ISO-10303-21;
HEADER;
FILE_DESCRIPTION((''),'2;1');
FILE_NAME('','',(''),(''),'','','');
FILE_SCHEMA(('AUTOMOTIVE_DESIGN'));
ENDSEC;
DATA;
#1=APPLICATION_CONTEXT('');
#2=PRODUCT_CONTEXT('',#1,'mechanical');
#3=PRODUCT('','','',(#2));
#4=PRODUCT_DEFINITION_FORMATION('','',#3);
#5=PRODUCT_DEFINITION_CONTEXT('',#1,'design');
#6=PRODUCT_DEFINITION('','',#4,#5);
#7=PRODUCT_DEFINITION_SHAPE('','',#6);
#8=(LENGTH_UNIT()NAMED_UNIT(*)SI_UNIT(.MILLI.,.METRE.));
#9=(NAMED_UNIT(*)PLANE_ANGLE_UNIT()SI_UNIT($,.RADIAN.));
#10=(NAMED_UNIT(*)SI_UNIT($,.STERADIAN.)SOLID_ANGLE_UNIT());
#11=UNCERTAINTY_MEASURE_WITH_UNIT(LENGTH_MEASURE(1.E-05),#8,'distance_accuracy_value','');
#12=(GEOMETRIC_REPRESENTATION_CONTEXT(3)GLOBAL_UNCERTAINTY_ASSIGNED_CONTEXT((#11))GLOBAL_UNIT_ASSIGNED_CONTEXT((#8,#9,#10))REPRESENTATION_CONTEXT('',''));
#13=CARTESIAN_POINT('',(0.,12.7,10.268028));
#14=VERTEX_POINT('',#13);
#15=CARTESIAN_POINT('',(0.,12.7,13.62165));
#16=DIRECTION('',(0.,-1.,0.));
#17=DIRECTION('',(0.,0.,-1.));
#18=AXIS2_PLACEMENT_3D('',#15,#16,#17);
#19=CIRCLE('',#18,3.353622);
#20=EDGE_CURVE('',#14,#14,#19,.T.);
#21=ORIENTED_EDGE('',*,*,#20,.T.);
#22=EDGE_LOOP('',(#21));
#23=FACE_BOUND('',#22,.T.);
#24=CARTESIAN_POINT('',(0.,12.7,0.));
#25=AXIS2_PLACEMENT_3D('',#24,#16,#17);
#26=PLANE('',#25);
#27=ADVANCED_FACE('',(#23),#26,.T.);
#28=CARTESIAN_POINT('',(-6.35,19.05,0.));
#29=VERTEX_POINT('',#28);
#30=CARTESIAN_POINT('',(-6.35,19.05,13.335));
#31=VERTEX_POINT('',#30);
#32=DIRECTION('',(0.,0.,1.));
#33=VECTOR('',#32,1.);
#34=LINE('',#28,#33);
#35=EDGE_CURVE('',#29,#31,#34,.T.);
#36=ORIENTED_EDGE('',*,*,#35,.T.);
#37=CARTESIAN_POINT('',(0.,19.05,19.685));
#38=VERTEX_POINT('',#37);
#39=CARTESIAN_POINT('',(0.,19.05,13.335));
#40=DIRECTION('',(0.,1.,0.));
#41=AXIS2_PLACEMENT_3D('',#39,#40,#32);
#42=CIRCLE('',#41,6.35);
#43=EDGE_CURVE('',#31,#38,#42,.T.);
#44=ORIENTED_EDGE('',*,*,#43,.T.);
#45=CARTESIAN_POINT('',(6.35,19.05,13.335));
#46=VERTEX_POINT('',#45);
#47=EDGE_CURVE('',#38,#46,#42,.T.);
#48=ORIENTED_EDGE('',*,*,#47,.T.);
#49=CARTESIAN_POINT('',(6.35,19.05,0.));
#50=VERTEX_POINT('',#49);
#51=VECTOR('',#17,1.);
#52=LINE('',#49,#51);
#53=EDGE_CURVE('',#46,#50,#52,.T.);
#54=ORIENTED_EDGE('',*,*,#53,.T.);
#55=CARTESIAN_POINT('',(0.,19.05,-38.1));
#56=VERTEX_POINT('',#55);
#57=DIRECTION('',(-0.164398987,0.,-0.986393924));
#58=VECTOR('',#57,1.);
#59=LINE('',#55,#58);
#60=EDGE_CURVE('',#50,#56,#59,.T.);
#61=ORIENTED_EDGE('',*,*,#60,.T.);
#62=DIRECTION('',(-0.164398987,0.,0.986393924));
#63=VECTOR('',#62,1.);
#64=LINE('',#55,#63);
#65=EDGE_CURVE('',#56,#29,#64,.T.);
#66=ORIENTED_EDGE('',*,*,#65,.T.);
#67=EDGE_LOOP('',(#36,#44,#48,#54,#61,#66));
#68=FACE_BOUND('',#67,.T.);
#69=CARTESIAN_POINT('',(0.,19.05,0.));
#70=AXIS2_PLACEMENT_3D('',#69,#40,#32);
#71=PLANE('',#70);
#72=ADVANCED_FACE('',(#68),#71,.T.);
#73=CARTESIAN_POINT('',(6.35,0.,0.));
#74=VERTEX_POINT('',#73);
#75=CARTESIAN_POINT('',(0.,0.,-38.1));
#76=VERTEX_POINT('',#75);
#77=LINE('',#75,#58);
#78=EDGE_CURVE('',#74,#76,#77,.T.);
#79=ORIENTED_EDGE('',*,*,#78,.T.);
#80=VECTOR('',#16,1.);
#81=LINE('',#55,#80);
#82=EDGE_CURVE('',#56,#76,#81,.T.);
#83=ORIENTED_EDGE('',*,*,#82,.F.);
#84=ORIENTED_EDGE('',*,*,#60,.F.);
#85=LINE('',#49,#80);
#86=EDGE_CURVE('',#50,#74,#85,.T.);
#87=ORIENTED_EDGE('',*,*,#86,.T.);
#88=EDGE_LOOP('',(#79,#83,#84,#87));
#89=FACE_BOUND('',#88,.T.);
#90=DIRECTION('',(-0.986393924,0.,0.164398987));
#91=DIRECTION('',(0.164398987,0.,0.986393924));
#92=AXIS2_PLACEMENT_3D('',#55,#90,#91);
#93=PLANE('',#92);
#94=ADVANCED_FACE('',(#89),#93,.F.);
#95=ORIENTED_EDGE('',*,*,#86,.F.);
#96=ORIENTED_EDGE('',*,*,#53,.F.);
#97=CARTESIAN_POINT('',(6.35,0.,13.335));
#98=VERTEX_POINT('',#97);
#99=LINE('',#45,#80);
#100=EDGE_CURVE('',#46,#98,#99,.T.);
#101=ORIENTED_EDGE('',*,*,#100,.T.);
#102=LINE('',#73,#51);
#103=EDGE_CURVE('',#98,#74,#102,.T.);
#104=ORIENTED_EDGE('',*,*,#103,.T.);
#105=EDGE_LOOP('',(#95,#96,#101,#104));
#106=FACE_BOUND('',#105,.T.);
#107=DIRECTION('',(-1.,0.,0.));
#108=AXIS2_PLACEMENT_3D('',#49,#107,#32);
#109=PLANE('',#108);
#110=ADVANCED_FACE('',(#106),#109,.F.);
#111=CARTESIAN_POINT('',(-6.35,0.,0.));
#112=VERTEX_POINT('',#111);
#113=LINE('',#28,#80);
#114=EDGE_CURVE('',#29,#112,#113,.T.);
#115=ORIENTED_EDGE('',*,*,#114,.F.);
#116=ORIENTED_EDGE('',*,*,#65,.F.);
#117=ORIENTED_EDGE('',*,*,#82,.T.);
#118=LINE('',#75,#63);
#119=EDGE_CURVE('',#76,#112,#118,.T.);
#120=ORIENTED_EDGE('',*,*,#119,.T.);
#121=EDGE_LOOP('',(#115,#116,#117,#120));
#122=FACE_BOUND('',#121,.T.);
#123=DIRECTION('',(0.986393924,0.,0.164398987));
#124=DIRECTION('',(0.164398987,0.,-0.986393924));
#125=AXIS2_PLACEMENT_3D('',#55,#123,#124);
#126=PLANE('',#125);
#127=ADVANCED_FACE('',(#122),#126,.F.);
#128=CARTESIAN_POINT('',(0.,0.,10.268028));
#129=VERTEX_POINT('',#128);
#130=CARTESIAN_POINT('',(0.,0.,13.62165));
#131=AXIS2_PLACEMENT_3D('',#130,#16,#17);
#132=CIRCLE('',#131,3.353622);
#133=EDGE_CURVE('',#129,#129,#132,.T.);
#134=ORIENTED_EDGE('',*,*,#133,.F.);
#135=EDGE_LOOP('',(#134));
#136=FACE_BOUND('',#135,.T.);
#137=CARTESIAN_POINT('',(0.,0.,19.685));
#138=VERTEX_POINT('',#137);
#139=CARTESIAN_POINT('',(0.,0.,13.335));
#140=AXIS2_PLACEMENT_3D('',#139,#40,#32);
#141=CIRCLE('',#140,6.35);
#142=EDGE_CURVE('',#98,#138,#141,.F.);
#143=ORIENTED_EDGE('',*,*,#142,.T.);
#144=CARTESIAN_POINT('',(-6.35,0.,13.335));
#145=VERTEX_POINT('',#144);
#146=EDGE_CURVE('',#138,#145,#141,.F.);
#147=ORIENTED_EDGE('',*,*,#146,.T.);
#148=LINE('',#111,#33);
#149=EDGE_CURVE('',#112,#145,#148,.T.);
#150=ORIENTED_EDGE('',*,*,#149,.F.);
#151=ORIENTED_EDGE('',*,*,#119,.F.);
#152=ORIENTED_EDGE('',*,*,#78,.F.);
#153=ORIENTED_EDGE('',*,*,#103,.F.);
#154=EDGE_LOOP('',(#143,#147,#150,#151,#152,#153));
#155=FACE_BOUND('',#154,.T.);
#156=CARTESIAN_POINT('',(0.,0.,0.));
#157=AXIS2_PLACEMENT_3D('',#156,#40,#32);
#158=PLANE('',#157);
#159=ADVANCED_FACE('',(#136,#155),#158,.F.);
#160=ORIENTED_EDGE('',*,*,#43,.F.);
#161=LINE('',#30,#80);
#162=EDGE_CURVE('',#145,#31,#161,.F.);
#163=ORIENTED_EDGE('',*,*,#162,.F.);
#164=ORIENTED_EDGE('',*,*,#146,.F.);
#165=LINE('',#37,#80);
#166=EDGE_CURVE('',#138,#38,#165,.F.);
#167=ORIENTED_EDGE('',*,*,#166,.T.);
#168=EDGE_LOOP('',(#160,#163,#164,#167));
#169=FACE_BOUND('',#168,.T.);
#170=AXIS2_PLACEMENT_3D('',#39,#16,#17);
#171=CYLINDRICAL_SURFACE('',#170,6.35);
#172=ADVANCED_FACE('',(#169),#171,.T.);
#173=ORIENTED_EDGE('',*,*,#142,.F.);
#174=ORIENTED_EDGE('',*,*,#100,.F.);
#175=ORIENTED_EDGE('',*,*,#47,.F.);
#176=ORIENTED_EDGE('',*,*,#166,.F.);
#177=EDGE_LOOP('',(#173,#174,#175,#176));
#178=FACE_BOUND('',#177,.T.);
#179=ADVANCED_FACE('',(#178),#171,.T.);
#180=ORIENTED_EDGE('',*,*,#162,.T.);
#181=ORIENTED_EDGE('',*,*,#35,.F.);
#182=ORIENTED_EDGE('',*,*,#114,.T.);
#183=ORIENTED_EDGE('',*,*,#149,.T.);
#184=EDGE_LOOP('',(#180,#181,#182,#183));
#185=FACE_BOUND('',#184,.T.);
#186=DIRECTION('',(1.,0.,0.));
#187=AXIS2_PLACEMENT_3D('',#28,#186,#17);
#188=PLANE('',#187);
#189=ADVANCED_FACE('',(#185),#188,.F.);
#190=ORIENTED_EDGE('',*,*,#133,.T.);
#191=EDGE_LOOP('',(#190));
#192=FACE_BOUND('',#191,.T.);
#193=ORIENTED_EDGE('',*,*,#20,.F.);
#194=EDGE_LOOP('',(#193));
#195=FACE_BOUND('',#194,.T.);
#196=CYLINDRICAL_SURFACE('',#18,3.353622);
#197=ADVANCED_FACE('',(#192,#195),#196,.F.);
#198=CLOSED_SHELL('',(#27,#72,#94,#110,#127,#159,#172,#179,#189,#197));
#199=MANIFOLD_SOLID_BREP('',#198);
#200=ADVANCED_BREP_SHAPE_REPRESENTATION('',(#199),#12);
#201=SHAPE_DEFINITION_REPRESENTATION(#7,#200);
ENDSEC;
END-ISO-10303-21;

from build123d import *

# Parameters (mm, degrees)
BOSS_EXTRUDE1_DEPTH = 19.05
FILLET1_R           = 6.35
SKETCH3_R           = 3.353621891
CUT_EXTRUDE1_DEPTH  = 12.7


with BuildPart() as part:
    # Sketch1 → Boss-Extrude1 (new body)
    with BuildSketch(Plane(origin=(0, 0, 0), x_dir=(1, 0, 0), z_dir=(0, 1, 0))):
        Polygon((0, 38.1), (-6.35, 0), (-6.35, -19.685), (6.35, -19.685), (6.35, 0), align=None)
    extrude(amount=BOSS_EXTRUDE1_DEPTH)

    # Fillet1
    fillet1_edges = [part.edges().sort_by_distance(p)[0] for p in [
        (-6.35, 9.525, 19.685),
        (6.35, 9.525, 19.685),
    ]]
    fillet(fillet1_edges, radius=FILLET1_R - 0.0001)  # a hair under: the kernel refuses the full size

    # Sketch3 → Cut-Extrude1 (cut)
    with BuildSketch(Plane.XZ):
        with Locations(Location((0, 13.621650325, 0), (0, 0, 270))):
            Circle(SKETCH3_R)
    extrude(amount=-CUT_EXTRUDE1_DEPTH, mode=Mode.SUBTRACT)


solid = part.part
